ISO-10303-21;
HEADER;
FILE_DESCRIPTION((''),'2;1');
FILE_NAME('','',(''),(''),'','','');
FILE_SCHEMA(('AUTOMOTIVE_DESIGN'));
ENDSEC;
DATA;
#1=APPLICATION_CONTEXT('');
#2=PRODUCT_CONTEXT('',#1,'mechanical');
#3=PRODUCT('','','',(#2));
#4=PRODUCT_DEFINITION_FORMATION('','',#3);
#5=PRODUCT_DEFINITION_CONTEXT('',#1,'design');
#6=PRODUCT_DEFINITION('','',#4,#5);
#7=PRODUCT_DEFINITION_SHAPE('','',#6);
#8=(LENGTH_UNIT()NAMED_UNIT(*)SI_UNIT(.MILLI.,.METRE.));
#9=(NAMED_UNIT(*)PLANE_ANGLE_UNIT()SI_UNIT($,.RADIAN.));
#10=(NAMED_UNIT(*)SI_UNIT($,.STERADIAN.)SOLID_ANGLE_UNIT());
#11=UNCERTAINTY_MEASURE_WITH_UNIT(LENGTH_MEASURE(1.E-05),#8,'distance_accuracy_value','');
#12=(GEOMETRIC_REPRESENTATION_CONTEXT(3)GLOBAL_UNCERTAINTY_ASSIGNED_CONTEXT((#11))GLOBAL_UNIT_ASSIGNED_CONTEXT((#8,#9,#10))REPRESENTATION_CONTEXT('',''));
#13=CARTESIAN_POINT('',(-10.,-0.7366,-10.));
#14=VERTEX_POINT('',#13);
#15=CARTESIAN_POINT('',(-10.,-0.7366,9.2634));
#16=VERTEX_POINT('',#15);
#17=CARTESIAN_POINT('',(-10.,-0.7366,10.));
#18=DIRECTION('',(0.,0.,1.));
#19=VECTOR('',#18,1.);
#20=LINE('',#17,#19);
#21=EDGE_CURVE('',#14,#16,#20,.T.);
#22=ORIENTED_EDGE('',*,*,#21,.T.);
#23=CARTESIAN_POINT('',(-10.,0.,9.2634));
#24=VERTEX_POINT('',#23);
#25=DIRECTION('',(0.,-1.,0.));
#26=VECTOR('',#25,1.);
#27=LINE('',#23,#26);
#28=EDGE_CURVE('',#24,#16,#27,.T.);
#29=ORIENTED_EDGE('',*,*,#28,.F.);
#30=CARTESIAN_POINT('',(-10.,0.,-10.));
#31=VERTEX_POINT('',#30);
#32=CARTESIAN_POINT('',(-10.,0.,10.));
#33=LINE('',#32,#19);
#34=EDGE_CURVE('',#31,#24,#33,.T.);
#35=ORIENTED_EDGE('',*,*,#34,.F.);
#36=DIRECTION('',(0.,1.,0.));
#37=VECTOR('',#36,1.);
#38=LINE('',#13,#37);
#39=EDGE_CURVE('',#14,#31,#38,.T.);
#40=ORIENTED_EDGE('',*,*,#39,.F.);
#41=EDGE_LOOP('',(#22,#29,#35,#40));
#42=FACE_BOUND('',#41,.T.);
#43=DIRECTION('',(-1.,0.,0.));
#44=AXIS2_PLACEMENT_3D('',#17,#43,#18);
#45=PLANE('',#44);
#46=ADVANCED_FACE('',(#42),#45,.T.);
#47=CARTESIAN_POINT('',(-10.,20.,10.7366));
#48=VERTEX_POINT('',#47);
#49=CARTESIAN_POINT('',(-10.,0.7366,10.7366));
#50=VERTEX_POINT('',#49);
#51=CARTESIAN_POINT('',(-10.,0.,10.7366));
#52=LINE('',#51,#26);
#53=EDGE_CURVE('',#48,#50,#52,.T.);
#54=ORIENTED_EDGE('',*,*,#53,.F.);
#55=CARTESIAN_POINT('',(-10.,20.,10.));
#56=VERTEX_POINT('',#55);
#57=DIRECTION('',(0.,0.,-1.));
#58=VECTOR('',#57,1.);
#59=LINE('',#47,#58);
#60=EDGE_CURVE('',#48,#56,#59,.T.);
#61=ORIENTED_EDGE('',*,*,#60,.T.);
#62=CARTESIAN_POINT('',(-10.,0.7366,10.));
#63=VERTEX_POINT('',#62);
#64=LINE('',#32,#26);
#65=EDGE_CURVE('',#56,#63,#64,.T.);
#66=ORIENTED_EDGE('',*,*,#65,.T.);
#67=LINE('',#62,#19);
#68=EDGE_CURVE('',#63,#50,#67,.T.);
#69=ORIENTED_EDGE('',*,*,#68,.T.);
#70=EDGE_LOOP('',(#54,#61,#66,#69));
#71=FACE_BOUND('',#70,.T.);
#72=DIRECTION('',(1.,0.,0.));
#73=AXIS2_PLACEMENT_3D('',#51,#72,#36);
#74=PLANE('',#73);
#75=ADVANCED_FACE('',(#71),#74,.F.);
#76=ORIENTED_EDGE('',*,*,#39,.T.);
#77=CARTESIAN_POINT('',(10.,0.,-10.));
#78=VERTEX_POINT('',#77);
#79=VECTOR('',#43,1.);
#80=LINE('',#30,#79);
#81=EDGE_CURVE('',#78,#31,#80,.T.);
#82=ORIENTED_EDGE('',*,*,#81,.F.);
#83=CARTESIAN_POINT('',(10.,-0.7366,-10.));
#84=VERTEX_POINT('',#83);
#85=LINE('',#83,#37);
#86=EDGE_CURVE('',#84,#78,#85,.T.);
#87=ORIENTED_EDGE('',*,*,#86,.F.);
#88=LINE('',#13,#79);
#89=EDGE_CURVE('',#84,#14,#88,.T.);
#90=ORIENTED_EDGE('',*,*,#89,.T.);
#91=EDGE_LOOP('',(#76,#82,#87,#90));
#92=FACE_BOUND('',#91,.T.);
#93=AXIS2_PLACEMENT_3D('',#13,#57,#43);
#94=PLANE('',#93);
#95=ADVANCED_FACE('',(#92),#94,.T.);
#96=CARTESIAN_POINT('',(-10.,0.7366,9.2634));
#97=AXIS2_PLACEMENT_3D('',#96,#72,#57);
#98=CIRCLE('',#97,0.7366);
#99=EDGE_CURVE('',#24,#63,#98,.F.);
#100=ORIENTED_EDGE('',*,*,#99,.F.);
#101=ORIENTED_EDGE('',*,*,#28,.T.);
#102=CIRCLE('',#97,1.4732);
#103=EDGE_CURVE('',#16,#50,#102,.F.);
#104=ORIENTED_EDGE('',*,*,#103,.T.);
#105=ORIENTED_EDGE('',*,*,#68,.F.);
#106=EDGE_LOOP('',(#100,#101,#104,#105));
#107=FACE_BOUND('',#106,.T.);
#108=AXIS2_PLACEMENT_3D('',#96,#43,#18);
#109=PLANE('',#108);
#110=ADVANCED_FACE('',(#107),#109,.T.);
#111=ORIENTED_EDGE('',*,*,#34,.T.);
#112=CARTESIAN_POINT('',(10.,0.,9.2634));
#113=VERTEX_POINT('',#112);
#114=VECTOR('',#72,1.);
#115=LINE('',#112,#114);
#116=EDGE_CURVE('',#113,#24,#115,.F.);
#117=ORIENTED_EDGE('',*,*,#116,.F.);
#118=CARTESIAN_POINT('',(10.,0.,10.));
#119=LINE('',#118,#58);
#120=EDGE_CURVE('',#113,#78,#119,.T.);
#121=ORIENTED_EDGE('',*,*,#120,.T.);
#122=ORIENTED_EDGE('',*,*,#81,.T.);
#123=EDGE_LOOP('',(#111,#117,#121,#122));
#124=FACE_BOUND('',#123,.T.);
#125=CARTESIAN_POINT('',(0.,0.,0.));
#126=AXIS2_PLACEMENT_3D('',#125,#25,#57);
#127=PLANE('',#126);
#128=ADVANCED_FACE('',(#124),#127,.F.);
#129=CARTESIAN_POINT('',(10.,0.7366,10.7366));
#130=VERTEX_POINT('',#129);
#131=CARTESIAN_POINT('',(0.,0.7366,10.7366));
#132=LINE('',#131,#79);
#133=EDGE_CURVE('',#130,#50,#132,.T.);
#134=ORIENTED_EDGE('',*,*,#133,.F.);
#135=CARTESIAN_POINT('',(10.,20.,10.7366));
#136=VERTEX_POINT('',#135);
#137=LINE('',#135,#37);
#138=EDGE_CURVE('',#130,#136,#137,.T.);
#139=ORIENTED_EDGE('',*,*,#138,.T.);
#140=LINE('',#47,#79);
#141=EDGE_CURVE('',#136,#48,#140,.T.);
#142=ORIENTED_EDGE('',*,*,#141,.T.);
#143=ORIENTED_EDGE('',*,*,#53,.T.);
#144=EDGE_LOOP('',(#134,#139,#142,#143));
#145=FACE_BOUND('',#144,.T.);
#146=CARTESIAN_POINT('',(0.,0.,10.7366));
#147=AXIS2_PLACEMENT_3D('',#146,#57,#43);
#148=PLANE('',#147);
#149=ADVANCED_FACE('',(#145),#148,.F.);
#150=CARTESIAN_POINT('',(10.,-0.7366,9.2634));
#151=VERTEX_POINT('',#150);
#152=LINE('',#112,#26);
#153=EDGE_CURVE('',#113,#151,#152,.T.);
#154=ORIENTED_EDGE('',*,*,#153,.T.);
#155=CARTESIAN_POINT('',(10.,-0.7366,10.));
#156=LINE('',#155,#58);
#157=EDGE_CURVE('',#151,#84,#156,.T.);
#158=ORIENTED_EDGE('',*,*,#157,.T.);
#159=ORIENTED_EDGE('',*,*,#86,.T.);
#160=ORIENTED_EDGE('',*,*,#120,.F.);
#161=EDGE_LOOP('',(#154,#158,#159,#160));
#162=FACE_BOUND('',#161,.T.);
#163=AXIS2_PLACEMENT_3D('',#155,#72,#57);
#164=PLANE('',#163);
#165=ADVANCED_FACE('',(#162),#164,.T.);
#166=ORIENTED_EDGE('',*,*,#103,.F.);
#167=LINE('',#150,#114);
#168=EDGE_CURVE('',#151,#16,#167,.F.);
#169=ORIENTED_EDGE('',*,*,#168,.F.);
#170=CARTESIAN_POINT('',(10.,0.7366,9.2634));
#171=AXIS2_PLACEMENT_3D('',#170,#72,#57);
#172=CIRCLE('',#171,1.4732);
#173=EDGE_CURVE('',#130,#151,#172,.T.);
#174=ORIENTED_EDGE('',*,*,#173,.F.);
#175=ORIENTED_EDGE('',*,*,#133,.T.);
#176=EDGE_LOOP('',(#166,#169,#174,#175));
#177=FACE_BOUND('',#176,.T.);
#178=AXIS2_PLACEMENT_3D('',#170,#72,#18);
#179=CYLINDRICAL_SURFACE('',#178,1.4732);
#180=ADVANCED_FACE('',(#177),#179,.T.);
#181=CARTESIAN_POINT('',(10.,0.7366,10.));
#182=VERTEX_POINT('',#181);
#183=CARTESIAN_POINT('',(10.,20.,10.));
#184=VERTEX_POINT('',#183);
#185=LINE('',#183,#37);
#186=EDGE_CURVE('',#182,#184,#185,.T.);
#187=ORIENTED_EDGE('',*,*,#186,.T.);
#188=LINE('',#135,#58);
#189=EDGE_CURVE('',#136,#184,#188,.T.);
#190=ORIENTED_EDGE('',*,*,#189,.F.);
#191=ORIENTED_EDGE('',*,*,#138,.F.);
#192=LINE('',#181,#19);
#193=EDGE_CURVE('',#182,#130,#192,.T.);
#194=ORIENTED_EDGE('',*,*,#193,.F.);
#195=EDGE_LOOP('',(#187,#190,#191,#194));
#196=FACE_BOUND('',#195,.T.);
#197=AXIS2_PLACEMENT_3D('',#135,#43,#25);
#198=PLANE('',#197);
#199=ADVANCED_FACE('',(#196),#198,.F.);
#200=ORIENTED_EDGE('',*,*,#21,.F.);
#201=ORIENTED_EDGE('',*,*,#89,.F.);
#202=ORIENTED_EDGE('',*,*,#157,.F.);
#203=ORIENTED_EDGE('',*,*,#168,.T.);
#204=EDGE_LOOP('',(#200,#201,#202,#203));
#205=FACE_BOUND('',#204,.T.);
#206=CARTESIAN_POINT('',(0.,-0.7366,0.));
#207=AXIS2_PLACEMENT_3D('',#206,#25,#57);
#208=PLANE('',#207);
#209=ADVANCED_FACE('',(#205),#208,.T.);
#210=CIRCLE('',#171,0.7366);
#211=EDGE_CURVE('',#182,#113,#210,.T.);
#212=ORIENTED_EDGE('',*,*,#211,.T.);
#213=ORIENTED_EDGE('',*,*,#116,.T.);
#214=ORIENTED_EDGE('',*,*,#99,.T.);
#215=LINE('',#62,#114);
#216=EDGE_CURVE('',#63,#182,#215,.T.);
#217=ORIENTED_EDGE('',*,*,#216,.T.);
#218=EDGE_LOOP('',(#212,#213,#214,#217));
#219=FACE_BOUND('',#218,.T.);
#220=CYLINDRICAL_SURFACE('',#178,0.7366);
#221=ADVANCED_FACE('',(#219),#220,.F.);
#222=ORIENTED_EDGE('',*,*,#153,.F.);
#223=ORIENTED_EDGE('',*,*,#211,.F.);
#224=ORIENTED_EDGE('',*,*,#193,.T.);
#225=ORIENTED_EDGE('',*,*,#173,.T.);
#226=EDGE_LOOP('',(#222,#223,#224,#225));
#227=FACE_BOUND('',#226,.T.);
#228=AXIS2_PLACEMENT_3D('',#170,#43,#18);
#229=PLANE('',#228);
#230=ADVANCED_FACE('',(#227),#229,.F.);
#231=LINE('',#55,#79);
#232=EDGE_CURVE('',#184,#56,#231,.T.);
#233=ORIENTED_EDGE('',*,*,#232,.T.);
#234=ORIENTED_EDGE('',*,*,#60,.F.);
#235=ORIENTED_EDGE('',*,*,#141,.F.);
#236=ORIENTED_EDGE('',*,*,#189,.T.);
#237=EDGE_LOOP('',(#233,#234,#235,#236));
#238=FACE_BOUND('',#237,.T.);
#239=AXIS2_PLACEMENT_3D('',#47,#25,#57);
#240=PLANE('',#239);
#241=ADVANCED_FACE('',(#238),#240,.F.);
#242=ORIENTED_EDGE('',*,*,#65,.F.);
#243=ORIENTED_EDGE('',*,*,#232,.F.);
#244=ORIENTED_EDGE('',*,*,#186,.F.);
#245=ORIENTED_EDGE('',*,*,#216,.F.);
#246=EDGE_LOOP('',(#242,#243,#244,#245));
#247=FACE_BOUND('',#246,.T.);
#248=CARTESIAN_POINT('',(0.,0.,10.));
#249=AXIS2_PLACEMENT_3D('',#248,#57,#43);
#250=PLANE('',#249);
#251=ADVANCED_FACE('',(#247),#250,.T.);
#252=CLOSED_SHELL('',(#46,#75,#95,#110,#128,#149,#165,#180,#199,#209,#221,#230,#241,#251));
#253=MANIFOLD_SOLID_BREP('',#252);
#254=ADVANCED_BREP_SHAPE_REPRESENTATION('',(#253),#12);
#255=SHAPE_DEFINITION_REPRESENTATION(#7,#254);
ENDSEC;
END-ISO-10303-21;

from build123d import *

# Parameters (mm, degrees)
SKETCH1_W                    = 20
SKETCH1_H                    = 20
BASE_FLANGE1_DEPTH           = 0.7366
EDGE_FLANGE1_STRIP_W         = 4.4196
EDGE_FLANGE1_STRIP_H         = 0.7366
EDGE_FLANGE1_STRIP_CUT_DEPTH = 20
EDGE_FLANGE1_DEPTH           = 20


# Sheet-metal steps are written as plain solids
with BuildPart() as part:
    # Sketch1 → Base-Flange1 (new body)
    with BuildSketch(Plane(origin=(0, 0, 0), x_dir=(1, 0, 0), z_dir=(0, 1, 0))):
        Rectangle(SKETCH1_W, SKETCH1_H)
    extrude(amount=-BASE_FLANGE1_DEPTH)

    # Edge-Flange1 strip (across the edge) → Edge-Flange1 strip cut (cut)
    with BuildSketch(Plane(origin=(-10, 0, 10), x_dir=(0, 0, -1), z_dir=(1, 0, 0))):
        with Locations((-1.4732, -0.3683)):
            Rectangle(EDGE_FLANGE1_STRIP_W, EDGE_FLANGE1_STRIP_H)
    extrude(amount=EDGE_FLANGE1_STRIP_CUT_DEPTH, mode=Mode.SUBTRACT)

    # Edge-Flange1 section (across the edge) → Edge-Flange1 (add)
    with BuildSketch(Plane(origin=(-10, 0, 10), x_dir=(0, 0, -1), z_dir=(1, 0, 0))):
        with BuildLine():
            Line((-0.7366, 0.7366), (-0.7366, 20))
            Line((-0.7366, 20), (0, 20))
            Line((0, 20), (0, 0.7366))
            ThreePointArc((0, 0.7366), (0.215745145, 0.215745145), (0.7366, 0))
            Line((0.7366, 0), (0.7366, -0.7366))
            ThreePointArc((0.7366, -0.7366), (-0.30510971, -0.30510971), (-0.7366, 0.7366))
        make_face()
    extrude(amount=EDGE_FLANGE1_DEPTH)


solid = part.part
